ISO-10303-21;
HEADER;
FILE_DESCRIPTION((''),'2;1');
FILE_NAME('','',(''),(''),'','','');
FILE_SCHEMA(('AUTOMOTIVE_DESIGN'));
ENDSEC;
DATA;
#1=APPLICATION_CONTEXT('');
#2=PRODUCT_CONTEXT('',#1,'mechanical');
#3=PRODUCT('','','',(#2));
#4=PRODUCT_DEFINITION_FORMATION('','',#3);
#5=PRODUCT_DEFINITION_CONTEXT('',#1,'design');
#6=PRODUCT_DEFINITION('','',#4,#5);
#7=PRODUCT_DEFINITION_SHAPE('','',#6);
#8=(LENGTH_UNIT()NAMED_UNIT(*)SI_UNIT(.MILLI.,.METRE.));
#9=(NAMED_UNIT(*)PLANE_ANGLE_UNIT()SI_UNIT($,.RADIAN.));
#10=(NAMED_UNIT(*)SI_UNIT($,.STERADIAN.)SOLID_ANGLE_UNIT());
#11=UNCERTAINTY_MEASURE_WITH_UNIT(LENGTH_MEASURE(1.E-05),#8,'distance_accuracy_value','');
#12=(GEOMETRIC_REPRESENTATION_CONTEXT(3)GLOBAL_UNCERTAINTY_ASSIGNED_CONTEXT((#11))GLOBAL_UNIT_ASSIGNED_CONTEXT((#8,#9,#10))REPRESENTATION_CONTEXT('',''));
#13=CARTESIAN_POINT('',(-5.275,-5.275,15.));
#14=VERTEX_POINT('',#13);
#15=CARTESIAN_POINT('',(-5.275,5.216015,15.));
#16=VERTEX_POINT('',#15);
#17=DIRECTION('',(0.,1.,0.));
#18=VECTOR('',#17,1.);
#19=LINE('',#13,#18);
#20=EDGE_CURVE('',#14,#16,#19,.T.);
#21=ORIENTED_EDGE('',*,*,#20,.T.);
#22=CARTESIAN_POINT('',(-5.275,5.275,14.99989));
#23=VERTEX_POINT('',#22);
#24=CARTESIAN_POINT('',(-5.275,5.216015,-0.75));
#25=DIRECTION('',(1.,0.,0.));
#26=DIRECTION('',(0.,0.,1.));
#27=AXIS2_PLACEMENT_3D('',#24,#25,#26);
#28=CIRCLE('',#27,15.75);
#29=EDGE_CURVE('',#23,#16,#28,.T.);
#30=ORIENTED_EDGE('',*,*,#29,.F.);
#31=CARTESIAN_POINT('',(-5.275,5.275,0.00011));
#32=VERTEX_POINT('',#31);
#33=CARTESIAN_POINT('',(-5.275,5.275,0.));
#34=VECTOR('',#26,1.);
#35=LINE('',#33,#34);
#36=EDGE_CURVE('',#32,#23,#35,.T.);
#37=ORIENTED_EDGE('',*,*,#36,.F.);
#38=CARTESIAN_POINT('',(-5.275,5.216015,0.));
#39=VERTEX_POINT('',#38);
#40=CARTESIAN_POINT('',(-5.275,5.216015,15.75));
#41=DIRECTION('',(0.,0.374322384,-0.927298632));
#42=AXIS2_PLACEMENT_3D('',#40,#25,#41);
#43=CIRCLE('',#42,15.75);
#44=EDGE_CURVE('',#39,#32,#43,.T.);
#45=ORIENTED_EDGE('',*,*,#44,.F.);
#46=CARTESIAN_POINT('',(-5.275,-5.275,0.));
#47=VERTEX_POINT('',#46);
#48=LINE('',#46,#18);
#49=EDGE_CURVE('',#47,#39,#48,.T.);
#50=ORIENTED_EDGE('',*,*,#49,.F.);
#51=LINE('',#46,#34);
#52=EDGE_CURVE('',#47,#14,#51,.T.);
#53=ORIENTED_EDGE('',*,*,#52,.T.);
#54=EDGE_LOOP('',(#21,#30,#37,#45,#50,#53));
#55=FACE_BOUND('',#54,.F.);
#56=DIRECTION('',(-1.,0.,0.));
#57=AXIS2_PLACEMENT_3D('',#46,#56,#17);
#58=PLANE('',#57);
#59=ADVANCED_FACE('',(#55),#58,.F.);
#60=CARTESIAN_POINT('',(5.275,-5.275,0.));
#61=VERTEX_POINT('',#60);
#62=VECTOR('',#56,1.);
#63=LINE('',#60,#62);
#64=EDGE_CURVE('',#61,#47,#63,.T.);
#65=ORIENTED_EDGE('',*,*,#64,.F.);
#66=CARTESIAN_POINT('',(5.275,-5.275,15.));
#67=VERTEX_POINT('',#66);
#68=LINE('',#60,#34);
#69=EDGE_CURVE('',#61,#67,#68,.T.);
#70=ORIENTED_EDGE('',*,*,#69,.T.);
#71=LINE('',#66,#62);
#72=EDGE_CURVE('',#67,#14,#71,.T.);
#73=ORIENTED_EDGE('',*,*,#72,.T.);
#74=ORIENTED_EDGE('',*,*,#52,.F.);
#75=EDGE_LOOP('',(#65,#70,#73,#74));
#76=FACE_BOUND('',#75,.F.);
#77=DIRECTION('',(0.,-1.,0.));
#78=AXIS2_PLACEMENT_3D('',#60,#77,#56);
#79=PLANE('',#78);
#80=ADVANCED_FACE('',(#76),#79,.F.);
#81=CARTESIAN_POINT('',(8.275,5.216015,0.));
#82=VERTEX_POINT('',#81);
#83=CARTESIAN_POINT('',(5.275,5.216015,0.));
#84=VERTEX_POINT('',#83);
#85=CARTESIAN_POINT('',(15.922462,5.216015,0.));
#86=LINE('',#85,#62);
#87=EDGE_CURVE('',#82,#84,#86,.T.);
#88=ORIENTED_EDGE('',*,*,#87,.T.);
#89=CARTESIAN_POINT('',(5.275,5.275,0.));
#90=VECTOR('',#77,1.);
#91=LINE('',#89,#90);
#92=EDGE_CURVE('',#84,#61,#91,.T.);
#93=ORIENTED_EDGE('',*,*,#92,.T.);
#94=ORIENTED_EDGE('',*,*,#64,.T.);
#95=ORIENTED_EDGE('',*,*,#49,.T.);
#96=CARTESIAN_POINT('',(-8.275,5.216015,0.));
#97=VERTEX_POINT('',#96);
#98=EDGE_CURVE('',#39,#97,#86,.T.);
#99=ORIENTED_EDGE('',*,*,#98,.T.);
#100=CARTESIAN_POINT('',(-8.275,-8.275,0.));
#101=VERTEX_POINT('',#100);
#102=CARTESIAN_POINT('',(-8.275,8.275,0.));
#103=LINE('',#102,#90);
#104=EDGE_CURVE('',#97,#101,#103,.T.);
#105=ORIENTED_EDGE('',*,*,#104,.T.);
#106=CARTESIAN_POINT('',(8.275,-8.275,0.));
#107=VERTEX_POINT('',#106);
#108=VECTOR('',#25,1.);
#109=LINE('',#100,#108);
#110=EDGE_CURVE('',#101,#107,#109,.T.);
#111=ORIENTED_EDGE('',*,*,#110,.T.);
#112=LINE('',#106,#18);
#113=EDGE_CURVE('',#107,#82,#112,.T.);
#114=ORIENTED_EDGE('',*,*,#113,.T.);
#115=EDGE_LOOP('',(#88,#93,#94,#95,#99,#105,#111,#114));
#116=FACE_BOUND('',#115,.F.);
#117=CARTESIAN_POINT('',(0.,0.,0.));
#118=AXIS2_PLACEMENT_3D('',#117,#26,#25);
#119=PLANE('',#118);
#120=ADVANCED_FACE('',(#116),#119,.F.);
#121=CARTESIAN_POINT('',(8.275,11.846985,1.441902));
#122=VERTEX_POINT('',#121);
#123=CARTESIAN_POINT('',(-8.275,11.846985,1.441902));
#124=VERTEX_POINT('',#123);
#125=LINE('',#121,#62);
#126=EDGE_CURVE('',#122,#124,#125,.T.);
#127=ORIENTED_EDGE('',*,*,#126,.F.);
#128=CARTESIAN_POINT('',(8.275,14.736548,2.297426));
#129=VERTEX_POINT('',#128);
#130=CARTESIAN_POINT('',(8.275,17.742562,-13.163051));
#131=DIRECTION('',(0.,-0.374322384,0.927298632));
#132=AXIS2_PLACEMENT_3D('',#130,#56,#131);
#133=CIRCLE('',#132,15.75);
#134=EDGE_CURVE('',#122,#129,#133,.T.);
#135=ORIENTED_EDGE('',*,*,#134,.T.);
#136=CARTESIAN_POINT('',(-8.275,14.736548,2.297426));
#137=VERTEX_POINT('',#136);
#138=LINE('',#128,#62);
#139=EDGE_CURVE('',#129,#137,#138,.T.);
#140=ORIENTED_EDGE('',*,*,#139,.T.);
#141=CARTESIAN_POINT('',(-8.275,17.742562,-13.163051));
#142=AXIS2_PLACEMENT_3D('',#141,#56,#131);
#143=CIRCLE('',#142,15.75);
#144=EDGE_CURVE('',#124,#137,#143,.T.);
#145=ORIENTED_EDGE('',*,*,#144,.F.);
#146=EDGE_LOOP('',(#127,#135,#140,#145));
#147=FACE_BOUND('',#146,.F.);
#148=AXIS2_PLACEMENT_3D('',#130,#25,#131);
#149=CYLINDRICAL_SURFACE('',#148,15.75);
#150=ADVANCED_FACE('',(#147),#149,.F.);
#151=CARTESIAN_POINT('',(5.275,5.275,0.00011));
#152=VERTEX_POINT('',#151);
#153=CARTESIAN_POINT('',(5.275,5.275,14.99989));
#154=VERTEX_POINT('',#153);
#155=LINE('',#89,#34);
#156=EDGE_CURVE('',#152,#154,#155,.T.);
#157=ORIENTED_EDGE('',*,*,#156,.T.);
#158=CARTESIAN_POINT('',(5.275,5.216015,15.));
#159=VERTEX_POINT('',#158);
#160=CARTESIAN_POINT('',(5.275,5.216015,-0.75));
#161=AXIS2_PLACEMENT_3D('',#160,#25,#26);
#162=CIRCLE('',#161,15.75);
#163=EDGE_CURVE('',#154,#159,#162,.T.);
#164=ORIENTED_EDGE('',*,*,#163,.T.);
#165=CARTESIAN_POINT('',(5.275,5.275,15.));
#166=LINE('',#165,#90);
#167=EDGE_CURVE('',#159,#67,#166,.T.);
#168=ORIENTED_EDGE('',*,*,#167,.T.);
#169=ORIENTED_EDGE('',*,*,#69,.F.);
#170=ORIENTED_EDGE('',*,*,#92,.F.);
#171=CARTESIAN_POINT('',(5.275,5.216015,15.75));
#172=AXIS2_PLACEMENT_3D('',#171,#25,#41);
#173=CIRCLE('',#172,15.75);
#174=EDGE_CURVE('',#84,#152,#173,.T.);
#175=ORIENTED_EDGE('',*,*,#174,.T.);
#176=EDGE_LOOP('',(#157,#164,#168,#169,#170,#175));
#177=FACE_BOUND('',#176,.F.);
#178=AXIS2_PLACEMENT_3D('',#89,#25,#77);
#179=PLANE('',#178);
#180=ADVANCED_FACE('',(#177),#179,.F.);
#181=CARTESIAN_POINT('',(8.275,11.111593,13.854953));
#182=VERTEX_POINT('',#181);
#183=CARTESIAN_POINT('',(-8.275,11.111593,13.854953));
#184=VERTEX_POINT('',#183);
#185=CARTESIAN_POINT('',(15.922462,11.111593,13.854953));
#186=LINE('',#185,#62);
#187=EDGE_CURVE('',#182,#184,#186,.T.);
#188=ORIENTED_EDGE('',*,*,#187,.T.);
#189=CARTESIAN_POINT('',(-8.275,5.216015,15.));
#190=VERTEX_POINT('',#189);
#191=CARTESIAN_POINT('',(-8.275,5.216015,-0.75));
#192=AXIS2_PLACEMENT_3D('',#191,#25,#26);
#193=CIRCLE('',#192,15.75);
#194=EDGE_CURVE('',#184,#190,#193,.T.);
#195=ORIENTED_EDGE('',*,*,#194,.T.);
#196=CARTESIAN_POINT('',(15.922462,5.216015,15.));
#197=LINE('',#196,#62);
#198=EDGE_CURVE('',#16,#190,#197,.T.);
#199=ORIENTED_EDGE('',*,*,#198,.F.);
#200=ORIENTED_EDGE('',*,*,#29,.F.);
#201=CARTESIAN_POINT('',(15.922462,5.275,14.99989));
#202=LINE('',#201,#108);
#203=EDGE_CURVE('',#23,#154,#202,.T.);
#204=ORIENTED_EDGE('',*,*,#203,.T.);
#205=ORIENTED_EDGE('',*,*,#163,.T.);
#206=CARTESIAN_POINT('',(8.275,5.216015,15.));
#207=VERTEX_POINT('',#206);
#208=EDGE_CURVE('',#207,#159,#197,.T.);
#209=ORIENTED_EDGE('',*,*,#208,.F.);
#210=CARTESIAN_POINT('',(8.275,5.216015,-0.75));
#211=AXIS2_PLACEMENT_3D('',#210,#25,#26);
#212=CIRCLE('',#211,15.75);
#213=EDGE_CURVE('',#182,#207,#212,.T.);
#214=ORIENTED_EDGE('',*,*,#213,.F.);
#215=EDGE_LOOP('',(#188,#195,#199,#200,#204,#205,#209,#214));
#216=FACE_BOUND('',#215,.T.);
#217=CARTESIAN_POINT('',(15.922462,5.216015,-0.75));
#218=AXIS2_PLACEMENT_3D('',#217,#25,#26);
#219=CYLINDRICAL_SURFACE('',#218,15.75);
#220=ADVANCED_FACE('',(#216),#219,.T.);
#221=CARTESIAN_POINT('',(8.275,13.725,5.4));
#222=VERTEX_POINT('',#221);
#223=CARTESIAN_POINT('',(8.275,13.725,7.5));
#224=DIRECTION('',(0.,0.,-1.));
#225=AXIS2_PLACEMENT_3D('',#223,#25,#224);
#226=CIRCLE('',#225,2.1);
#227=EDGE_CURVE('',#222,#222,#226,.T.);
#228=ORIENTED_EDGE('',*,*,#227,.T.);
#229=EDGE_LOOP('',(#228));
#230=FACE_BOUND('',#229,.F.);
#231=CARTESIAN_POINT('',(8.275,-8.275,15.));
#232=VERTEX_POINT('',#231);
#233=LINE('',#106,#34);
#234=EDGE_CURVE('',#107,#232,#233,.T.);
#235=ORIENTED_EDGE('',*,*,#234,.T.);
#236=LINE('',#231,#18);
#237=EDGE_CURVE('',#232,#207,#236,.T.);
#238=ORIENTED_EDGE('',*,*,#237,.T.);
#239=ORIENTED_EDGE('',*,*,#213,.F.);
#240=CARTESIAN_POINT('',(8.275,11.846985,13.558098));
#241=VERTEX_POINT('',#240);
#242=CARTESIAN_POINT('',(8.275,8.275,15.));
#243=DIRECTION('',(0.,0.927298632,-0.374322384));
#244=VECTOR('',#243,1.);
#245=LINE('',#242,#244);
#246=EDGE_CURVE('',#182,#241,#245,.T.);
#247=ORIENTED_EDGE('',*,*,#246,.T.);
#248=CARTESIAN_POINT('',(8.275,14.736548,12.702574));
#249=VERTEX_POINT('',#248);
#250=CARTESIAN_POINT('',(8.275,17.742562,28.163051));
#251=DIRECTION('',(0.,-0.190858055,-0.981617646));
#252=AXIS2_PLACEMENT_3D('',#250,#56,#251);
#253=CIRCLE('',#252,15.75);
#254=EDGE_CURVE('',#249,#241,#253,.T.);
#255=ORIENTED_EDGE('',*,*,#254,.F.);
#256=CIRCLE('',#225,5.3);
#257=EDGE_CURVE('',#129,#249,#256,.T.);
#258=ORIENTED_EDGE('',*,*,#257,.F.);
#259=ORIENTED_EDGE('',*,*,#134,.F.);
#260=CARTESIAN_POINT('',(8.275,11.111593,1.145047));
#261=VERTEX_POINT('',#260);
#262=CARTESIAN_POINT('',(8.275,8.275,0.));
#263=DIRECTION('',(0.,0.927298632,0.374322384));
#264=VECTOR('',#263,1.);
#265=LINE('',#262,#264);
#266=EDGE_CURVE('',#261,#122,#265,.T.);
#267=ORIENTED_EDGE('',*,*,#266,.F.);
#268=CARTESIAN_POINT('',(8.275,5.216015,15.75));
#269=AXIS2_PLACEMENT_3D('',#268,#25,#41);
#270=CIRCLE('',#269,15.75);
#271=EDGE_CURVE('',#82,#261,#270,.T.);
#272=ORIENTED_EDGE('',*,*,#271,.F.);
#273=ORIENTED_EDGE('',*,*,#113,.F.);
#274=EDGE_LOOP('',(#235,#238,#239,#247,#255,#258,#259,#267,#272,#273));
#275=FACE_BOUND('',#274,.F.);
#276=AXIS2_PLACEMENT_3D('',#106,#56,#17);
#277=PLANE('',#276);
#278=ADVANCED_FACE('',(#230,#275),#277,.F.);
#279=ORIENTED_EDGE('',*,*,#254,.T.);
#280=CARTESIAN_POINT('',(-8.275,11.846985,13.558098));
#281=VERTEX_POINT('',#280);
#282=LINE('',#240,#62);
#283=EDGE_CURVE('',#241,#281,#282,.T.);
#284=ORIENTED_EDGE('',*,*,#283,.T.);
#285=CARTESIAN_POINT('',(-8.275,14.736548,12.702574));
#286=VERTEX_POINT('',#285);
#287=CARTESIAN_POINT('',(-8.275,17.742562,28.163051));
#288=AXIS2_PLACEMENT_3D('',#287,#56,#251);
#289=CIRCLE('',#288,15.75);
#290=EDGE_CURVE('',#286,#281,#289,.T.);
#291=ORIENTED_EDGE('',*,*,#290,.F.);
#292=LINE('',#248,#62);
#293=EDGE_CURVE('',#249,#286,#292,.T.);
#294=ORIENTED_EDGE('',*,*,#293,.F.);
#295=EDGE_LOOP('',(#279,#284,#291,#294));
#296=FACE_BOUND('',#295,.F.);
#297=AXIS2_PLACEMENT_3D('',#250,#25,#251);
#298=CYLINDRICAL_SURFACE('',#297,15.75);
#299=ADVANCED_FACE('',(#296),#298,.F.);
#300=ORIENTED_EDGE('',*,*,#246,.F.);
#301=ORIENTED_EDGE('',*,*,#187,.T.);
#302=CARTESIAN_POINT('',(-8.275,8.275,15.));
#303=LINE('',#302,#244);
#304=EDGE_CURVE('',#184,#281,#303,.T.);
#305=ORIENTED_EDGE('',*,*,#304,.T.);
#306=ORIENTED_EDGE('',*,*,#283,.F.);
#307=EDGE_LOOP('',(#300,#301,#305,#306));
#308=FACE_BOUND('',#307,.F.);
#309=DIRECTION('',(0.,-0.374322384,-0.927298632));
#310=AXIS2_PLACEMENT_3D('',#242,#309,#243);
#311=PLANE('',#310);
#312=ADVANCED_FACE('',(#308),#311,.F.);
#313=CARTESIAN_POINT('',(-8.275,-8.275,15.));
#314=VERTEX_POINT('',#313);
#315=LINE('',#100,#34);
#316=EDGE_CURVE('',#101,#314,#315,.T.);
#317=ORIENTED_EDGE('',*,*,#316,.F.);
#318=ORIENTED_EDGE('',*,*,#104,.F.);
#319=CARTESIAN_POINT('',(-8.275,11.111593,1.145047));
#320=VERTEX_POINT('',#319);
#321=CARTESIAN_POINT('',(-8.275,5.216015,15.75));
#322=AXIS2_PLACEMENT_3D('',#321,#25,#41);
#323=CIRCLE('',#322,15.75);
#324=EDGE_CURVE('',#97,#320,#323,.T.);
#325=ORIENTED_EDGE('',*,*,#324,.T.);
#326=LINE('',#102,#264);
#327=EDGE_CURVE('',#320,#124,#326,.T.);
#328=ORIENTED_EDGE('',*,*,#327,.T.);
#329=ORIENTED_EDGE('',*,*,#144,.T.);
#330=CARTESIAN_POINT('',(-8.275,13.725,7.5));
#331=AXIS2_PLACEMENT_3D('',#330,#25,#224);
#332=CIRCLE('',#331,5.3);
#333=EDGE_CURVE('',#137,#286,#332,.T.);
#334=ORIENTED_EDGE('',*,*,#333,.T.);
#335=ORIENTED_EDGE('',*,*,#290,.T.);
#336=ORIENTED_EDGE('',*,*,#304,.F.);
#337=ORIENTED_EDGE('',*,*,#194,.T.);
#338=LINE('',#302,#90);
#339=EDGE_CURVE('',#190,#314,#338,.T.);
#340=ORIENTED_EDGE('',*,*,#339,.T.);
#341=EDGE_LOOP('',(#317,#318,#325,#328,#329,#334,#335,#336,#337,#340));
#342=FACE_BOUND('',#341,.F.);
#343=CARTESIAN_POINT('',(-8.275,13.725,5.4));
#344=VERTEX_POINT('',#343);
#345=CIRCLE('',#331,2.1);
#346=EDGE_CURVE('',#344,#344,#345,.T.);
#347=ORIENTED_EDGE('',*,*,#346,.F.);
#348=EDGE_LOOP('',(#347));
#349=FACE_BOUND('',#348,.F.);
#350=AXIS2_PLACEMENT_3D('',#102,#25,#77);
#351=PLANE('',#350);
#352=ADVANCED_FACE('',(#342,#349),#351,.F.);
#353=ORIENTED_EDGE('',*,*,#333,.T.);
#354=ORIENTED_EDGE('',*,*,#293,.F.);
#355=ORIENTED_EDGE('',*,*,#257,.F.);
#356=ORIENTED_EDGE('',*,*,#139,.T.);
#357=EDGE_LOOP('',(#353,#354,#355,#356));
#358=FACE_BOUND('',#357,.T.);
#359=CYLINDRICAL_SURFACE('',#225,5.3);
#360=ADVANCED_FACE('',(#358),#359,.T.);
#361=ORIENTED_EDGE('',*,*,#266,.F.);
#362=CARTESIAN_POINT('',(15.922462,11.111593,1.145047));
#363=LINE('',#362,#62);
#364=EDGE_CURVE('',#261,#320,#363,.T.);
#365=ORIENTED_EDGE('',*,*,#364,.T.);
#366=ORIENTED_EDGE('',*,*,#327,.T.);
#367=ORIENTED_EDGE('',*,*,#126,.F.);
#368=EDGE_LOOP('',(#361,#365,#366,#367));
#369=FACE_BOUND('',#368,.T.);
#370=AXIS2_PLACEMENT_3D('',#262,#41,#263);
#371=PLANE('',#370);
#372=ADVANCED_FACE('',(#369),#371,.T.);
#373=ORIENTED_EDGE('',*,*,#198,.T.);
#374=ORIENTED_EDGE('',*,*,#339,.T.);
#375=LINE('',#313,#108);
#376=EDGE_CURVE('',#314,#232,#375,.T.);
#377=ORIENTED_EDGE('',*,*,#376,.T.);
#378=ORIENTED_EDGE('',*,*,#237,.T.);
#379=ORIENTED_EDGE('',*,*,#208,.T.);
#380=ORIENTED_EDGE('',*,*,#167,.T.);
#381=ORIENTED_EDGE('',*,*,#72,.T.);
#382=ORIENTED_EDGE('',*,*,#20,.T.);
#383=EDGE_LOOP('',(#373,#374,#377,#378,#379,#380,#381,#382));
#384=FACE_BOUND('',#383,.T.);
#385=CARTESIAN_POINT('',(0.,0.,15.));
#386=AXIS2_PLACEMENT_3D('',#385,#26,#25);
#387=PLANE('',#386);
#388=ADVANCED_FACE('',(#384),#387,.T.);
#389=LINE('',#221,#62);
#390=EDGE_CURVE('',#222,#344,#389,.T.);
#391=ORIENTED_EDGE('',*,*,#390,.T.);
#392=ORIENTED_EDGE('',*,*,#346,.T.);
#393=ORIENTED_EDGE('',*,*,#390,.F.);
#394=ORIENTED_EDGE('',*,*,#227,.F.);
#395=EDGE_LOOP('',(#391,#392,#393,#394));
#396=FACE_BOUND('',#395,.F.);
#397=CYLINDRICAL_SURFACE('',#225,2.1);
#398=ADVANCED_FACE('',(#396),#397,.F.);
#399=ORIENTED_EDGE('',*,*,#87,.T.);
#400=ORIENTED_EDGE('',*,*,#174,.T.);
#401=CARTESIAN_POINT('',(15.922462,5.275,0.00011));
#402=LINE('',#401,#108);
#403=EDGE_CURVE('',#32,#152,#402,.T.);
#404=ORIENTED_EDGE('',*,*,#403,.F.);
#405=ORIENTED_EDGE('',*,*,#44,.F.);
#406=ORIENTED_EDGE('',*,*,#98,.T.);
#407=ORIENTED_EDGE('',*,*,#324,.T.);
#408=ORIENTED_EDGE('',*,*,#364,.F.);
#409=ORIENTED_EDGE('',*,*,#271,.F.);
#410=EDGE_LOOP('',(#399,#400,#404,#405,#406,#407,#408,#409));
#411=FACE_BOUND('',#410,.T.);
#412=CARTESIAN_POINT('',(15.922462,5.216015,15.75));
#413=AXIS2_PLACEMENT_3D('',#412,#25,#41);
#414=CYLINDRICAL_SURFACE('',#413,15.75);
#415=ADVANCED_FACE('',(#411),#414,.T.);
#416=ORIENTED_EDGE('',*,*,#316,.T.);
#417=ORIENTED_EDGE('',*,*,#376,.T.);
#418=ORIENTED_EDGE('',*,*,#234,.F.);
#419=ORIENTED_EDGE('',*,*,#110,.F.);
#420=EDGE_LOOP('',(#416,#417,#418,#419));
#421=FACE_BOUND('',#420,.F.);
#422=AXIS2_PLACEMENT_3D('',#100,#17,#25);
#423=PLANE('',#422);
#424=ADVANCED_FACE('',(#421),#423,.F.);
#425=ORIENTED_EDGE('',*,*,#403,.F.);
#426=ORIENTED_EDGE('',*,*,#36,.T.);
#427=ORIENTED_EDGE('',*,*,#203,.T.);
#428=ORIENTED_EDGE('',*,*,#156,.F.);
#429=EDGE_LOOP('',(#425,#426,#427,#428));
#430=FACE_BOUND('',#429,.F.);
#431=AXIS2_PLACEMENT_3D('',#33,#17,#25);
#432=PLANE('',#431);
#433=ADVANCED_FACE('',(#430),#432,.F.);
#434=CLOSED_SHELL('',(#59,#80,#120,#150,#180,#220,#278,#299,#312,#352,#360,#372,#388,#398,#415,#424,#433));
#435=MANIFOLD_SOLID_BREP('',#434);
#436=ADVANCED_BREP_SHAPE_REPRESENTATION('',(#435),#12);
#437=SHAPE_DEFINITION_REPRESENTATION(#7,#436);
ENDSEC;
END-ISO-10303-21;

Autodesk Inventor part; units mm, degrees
ref_plane "YZ Plane" through (0, 0, 0) normal (1, 0, 0) x (0, 1, 0)
ref_plane "XZ Plane" through (0, 0, 0) normal (0, 1, 0) x (-1, 0, 0)
ref_plane "XY Plane" through (0, 0, 0) normal (0, 0, 1) x (1, 0, 0)
sketch "Skizze1" plane through (0, 0, 0) normal (0, 0, 1) x (1, 0, 0)
  line L0 (-5.275, 5.275) -> (5.275, 5.275)
  line L1 (5.275, 5.275) -> (5.275, -5.275)
  line L2 (5.275, -5.275) -> (-5.275, -5.275)
  line L3 (-5.275, -5.275) -> (-5.275, 5.275)
  line L4 (-5.275, 5.275) -> (5.275, -5.275) construction
  line L5 (5.275, 5.275) -> (-5.275, -5.275) construction
  line L6 (8.275, 8.275) -> (-8.275, 8.275)
  line L7 (-8.275, 8.275) -> (-8.275, -8.275)
  line L8 (-8.275, -8.275) -> (8.275, -8.275)
  line L9 (8.275, -8.275) -> (8.275, 8.275)
  point P0 (0, 0)
  dimension "d0" = 10.55
  dimension "d1" = 10.55
  dimension "d2" = 3
extrude "Extrusion1" add sketch "Skizze1" along normal blind 15
sketch "Skizze2" plane through (8.275, -8.275, 0) normal (1, 0, 0) x (0, 0, -1)
  line L0 (0, 0) -> (0, 16.55) projected
  line L1 (0, 16.55) -> (-15, 16.55) projected
  line L2 (-15, 0) -> (-15, 16.55) projected
  line L3 (0, 0) -> (-15, 0) projected
  circle A0 centre (-7.5, 22) radius 2.1
  circle A1 centre (-7.5, 22) radius 5.3
  line L4 (-15, 16.55) -> (-12.8, 22)
  line L5 (0, 16.55) -> (0, 0) projected
  line L6 (0, 16.55) -> (-2.2, 22)
  point P0 (0, 8.275)
  dimension "d5" = 4.2
  dimension "d6" = 22
  dimension "d7" = 7.5
  dimension "d8" = 3.2
extrude "Extrusion2" add sketch "Skizze2" against normal up to surface (16.55 mm away) contours L1 L4 A1 L6 | A1
fillet "Rundung1" radius 15.75 4 edges at (0, 13.725, 2.2) (0, 8.275, 0) (0, 8.275, 15) (0, 13.725, 12.8)
equation "\"d1\" = d0"
properties part number "AL_PipeMount"
